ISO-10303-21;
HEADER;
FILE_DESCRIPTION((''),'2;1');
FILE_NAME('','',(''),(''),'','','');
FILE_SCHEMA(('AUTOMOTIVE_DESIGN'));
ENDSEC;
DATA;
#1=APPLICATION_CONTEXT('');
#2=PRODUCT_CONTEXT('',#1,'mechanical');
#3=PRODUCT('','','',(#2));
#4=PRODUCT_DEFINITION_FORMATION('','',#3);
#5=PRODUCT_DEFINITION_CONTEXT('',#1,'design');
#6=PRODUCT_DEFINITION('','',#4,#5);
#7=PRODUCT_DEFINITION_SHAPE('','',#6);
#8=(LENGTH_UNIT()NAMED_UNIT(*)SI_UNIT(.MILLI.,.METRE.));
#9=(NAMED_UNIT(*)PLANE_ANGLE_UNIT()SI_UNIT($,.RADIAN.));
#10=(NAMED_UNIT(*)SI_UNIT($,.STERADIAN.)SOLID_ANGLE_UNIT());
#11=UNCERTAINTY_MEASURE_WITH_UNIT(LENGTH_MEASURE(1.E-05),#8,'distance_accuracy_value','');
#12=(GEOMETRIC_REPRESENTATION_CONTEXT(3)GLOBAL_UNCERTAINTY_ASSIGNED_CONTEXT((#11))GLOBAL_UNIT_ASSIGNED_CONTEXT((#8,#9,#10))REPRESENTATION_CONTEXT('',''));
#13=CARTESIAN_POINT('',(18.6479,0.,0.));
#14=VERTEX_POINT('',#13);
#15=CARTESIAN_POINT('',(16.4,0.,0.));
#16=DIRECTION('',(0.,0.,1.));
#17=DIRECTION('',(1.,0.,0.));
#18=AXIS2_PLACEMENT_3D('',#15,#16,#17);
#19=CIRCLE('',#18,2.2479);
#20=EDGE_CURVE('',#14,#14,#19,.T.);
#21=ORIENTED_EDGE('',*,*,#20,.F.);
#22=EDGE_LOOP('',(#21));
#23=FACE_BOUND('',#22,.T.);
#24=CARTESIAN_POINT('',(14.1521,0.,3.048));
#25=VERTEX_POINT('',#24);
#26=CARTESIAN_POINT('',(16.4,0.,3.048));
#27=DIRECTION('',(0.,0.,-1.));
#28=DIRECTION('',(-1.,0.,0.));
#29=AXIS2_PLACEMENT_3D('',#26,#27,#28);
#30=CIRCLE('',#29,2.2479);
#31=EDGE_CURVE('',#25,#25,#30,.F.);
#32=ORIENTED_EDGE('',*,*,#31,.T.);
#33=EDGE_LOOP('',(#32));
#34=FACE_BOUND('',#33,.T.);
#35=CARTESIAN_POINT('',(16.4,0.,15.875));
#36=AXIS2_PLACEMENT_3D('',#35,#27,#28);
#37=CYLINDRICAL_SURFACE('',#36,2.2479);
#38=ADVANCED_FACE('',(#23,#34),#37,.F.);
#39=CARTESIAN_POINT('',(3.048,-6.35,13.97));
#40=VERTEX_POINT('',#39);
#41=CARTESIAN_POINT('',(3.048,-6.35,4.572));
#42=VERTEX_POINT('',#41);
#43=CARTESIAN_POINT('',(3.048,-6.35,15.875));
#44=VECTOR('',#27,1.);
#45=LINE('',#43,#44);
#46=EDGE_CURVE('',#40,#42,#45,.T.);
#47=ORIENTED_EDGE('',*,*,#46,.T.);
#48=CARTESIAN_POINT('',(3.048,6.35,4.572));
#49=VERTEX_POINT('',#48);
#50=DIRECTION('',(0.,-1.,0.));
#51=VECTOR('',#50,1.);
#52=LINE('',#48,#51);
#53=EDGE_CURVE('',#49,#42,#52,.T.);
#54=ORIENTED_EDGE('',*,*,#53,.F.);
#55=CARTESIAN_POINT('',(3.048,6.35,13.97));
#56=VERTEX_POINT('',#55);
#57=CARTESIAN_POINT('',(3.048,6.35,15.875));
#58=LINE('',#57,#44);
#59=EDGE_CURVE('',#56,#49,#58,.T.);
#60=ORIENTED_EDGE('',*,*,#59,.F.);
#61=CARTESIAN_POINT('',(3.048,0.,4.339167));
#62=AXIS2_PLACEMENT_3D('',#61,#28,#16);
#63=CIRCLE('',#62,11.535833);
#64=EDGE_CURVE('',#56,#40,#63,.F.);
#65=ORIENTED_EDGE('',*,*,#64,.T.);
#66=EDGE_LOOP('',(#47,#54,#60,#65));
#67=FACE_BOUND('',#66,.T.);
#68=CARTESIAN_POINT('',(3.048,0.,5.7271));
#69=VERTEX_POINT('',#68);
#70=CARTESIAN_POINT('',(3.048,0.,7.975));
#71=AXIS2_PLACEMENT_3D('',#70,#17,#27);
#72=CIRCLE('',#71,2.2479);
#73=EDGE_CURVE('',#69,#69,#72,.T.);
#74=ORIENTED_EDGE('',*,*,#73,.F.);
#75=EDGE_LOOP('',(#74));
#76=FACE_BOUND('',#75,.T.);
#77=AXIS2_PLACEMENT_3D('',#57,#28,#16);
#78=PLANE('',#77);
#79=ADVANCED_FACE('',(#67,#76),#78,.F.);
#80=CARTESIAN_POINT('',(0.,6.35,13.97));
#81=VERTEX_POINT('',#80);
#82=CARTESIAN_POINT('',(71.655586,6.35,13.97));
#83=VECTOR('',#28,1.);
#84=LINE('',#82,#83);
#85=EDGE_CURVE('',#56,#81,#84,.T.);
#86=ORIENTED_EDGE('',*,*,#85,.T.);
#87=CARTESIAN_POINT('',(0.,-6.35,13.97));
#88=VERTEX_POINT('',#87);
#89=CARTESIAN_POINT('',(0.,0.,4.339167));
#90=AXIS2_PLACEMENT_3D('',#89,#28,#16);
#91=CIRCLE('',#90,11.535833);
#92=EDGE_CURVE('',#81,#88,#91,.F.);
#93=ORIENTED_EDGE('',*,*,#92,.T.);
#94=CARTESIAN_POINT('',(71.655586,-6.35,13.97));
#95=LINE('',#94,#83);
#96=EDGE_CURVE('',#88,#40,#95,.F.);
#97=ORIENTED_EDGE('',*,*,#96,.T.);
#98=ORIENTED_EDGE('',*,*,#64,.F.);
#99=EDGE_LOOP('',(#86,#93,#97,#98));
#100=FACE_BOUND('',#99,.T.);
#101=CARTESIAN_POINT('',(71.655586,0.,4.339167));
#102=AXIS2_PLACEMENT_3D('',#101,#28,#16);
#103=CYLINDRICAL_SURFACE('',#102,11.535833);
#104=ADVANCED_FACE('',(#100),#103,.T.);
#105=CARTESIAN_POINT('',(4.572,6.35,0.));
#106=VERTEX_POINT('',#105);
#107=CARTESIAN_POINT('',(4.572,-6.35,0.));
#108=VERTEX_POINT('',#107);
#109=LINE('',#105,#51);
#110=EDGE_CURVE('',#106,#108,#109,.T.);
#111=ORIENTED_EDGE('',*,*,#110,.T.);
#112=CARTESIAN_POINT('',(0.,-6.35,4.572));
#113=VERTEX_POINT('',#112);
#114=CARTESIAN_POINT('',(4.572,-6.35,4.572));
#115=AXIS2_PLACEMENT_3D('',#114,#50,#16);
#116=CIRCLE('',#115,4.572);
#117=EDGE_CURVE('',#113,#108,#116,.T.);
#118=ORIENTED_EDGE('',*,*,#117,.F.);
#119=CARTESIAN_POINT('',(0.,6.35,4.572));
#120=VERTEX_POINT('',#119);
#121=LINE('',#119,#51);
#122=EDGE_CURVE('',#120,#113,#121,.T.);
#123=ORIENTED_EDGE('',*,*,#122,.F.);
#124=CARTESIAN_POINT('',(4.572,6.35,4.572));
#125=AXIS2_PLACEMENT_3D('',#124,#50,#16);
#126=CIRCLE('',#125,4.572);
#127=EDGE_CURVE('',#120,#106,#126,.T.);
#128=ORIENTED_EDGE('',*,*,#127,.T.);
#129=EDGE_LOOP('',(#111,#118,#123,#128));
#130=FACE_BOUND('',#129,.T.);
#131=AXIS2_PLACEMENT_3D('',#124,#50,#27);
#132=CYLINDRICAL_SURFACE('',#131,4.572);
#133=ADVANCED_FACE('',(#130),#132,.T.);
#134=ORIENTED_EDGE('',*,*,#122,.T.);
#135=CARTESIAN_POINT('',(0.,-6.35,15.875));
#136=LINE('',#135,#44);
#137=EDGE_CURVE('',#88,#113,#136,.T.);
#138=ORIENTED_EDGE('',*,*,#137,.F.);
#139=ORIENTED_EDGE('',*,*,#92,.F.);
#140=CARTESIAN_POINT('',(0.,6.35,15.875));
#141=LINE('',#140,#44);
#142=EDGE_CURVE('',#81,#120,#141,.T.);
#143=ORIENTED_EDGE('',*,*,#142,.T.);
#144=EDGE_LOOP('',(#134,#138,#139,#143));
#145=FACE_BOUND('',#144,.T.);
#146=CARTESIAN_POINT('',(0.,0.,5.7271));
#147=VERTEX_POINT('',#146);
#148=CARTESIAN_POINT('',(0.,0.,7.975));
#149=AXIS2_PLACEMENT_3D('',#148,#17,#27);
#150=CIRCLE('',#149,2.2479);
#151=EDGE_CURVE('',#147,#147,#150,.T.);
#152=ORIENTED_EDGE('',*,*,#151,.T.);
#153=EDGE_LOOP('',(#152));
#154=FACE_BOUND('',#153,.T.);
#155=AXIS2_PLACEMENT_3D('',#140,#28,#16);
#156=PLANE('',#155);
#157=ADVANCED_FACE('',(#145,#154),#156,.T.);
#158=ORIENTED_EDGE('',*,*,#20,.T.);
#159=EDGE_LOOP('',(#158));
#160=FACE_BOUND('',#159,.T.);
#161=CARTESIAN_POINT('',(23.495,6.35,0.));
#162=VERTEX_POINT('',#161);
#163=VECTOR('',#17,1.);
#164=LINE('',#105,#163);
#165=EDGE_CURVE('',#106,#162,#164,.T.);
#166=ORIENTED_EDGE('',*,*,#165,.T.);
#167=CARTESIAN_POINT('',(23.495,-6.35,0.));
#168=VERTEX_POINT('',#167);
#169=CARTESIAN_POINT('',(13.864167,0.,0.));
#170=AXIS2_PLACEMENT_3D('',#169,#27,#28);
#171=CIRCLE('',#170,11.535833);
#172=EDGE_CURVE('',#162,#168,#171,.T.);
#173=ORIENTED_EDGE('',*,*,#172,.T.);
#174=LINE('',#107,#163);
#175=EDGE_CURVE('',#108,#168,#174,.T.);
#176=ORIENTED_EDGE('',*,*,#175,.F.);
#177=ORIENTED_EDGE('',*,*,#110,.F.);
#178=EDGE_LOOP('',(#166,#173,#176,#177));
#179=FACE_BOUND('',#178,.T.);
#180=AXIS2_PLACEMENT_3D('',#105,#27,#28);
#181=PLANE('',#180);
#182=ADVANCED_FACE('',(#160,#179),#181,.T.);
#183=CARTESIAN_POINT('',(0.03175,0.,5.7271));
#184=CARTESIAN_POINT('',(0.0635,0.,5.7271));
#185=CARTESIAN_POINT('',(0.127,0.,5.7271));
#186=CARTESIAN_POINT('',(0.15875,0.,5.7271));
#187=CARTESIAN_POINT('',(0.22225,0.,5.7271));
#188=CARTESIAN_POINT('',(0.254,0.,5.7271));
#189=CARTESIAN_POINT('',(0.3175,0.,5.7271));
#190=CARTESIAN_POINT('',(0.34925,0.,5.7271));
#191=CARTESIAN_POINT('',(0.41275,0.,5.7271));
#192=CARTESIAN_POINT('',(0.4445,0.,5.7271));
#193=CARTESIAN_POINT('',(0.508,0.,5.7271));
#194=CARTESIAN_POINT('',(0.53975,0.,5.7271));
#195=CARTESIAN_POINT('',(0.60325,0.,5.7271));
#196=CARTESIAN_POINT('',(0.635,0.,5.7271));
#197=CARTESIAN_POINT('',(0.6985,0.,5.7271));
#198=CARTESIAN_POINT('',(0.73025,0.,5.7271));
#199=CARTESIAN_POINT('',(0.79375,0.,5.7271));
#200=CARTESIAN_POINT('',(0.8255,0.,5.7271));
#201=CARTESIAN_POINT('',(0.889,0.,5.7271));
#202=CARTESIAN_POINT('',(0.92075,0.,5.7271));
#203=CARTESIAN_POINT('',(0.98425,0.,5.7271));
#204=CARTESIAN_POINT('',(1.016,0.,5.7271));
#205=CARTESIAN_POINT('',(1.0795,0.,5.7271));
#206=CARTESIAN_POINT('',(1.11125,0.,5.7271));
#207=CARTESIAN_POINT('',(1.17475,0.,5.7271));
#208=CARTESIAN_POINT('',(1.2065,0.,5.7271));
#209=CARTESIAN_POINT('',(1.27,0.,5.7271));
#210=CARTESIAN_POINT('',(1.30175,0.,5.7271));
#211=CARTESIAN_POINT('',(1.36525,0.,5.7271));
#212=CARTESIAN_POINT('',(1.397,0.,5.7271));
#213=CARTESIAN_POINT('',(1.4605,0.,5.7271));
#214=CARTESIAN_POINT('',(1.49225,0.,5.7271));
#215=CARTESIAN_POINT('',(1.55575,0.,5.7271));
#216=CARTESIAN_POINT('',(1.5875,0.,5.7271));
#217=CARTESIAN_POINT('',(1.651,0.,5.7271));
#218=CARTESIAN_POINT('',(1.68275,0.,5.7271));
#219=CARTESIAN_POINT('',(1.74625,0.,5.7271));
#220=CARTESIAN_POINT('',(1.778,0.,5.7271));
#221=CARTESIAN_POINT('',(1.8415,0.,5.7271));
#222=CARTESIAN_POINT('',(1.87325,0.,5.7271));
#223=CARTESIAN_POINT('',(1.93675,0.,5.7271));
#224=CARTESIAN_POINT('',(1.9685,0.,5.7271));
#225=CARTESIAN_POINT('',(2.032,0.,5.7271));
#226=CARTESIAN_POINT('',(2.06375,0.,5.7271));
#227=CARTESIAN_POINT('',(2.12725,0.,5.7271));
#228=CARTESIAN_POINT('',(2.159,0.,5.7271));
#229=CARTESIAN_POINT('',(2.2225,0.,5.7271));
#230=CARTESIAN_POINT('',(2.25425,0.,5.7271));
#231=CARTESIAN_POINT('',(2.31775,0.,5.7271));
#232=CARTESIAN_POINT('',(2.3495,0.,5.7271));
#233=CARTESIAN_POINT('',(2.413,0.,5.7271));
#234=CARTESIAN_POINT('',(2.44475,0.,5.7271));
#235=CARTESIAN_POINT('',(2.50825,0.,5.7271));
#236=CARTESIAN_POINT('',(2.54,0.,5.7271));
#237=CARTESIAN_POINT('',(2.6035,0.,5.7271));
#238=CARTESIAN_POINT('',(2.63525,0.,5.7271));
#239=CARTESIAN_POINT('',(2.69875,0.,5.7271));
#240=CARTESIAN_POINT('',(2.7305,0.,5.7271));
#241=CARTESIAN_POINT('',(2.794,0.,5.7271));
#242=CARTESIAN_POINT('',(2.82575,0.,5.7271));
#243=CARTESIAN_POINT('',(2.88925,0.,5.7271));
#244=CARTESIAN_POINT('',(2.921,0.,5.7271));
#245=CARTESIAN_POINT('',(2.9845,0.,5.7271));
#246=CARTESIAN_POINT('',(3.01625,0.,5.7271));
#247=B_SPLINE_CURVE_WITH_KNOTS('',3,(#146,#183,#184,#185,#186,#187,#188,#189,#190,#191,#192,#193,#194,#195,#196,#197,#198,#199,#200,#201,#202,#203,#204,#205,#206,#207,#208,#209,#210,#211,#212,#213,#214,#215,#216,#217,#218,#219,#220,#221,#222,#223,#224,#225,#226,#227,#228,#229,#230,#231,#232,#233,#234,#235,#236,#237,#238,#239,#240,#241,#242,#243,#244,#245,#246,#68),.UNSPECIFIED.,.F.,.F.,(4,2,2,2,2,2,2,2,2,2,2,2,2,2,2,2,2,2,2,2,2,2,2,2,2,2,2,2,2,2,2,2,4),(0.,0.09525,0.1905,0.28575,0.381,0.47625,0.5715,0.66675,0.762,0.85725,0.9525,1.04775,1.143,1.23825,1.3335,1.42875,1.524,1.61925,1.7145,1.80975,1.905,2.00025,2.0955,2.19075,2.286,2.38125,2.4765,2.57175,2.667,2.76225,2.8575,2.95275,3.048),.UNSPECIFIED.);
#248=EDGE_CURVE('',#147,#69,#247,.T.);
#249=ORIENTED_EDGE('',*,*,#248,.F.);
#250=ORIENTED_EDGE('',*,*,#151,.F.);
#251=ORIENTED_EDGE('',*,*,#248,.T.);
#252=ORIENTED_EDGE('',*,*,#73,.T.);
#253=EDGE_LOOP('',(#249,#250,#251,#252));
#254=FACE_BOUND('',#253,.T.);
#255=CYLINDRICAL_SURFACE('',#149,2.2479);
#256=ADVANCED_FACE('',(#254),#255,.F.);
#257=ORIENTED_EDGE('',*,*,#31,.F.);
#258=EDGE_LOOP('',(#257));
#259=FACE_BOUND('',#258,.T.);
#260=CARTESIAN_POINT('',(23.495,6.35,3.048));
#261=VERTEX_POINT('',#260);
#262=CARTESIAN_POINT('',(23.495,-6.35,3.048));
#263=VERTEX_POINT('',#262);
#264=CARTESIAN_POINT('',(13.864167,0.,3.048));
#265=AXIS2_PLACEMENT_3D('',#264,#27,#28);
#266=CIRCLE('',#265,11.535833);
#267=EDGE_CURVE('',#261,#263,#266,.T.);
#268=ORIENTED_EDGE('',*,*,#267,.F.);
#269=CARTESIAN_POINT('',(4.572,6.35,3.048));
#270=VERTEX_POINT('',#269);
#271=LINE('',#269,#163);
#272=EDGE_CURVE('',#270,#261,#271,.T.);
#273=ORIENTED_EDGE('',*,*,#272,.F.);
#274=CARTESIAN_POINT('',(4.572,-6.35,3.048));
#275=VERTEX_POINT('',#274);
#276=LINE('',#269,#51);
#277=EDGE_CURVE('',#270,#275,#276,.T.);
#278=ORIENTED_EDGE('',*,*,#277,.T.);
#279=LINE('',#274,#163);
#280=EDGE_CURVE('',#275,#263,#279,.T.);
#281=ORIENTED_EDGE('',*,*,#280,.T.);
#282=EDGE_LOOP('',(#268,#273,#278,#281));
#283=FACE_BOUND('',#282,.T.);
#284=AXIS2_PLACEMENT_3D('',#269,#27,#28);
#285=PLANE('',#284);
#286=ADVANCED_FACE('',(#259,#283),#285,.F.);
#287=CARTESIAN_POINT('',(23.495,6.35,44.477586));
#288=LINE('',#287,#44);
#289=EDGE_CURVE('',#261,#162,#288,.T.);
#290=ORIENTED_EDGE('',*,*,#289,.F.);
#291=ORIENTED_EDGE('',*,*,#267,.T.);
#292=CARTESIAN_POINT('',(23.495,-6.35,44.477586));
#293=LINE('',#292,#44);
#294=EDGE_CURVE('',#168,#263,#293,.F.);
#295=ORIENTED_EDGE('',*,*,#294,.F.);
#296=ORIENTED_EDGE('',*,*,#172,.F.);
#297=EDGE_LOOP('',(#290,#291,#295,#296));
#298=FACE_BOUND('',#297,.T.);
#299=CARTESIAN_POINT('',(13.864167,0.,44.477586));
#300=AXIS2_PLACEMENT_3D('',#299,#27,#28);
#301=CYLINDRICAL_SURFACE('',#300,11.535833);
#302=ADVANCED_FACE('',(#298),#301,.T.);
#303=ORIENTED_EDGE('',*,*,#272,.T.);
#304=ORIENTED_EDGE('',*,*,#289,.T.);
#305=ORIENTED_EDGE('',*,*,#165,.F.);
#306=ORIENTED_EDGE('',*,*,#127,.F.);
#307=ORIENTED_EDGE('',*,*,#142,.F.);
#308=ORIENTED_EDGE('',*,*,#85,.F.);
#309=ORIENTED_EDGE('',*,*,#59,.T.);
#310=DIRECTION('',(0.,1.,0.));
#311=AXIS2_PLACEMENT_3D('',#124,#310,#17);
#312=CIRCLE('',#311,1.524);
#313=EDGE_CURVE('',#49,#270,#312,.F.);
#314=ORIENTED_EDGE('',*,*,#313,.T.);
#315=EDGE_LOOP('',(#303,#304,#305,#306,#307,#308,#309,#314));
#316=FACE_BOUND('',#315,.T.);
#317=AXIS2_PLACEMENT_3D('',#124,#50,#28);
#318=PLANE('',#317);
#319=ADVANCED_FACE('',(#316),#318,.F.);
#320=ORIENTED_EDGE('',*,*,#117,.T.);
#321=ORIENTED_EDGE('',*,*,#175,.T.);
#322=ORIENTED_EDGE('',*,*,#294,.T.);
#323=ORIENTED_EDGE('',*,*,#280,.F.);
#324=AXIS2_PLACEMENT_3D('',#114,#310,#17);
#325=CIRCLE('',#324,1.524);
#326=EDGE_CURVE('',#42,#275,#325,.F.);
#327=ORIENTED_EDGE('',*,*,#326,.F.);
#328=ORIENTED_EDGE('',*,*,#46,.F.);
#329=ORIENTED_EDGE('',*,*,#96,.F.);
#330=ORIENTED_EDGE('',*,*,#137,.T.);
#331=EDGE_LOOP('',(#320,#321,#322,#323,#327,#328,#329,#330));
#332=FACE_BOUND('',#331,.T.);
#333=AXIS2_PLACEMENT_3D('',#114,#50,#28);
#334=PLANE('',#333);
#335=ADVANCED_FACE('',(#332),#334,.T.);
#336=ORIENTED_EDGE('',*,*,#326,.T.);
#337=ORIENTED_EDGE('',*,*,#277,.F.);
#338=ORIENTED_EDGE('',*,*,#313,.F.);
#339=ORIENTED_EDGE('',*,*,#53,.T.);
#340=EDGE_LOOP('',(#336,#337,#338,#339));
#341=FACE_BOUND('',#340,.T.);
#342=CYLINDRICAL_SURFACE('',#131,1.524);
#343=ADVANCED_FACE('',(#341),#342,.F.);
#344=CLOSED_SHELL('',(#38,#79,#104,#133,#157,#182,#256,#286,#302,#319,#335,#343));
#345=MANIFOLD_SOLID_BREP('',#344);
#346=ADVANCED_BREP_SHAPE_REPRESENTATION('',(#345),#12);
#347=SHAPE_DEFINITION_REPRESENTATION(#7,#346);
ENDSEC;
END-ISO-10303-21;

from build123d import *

# Parameters (mm, degrees)
EXTRUDE_THIN1_START     = -6.35
EXTRUDE_THIN1_DEPTH     = 12.7
SKETCH4_R               = 2.2479
EXTRUDE3_DEPTH          = 29.141606724
SKETCH6_R               = 2.2479
CUT_EXTRUDE1_DEPTH      = 31.618591166
CUT_EXTRUDE2_DEPTH      = 29.141606724
CUT_EXTRUDE2_DEPTH_BACK = 29.141606724
CUT_EXTRUDE3_DEPTH      = 31.618591166
CUT_EXTRUDE3_DEPTH_BACK = 31.618591166


# Read off the part's stored shape, not the designer's step: Extrude-Thin1
with BuildPart() as part:
    # Extrude-Thin1 outline → Extrude-Thin1 (new body)
    with BuildSketch(Plane(origin=(0, 0, 0), x_dir=(1, 0, 0), z_dir=(0, 1, 0)).offset(EXTRUDE_THIN1_START)):
        with BuildLine():
            Line((4.572, -3.048), (25.4, -3.048))
            Line((25.4, -3.048), (25.4, 0))
            Line((25.4, 0), (4.572, 0))
            ThreePointArc((4.572, 0), (1.339107796, -1.339107796), (0, -4.572))
            Line((0, -4.572), (0, -15.875))
            Line((0, -15.875), (3.048, -15.875))
            Line((3.048, -15.875), (3.048, -4.572))
            ThreePointArc((3.048, -4.572), (3.494369265, -3.494369265), (4.572, -3.048))
        make_face()
    extrude(amount=EXTRUDE_THIN1_DEPTH)

    # Sketch4 → Extrude3 (cut, through all)
    with BuildSketch(Plane(origin=(3.048, 0, 0), x_dir=(0, 0, -1), z_dir=(1, 0, 0))):
        with Locations((-7.975, 0)):
            Circle(SKETCH4_R)
    extrude(amount=-EXTRUDE3_DEPTH, mode=Mode.SUBTRACT)

    # Sketch6 → Cut-Extrude1 (cut, through all)
    with BuildSketch(Plane.XY):
        with Locations(Location((16.4, 0, 0), (0, 0, 180))):
            Circle(SKETCH6_R)
    extrude(amount=CUT_EXTRUDE1_DEPTH, mode=Mode.SUBTRACT)

    # Sketch8 → Cut-Extrude2 (cut, two sides: drawn at the far end of the back side and taken through both)
    with BuildSketch(Plane(origin=(3.048, 0, 0), x_dir=(0, 0, -1), z_dir=(1, 0, 0)).offset(-CUT_EXTRUDE2_DEPTH_BACK)):
        with BuildLine():
            Line((12.319806212, 46.222872755), (-13.97, 6.35))
            ThreePointArc((-13.97, 6.35), (-15.875, 0), (-13.97, -6.35))
            Line((-13.97, -6.35), (12.319806212, -46.222872755))
            Line((12.319806212, -46.222872755), (-83.199823025, -46.222872755))
            Line((-83.199823025, -46.222872755), (-83.199823025, 46.222872755))
            Line((-83.199823025, 46.222872755), (12.319806212, 46.222872755))
        make_face()
    extrude(amount=CUT_EXTRUDE2_DEPTH + CUT_EXTRUDE2_DEPTH_BACK, mode=Mode.SUBTRACT)

    # Sketch9 → Cut-Extrude3 (cut, two sides: drawn at the far end of the back side and taken through both)
    with BuildSketch(Plane.XY.offset(-CUT_EXTRUDE3_DEPTH_BACK)):
        with BuildLine():
            Line((-11.412637658, 59.293250448), (23.495, 6.35))
            ThreePointArc((23.495, 6.35), (25.4, 0), (23.495, -6.35))
            Line((23.495, -6.35), (-11.412637658, -59.293250448))
            Line((-11.412637658, -59.293250448), (115.418445833, -59.293250448))
            Line((115.418445833, -59.293250448), (115.418445833, 59.293250448))
            Line((115.418445833, 59.293250448), (-11.412637658, 59.293250448))
        make_face()
    extrude(amount=CUT_EXTRUDE3_DEPTH + CUT_EXTRUDE3_DEPTH_BACK, mode=Mode.SUBTRACT)


solid = part.part
